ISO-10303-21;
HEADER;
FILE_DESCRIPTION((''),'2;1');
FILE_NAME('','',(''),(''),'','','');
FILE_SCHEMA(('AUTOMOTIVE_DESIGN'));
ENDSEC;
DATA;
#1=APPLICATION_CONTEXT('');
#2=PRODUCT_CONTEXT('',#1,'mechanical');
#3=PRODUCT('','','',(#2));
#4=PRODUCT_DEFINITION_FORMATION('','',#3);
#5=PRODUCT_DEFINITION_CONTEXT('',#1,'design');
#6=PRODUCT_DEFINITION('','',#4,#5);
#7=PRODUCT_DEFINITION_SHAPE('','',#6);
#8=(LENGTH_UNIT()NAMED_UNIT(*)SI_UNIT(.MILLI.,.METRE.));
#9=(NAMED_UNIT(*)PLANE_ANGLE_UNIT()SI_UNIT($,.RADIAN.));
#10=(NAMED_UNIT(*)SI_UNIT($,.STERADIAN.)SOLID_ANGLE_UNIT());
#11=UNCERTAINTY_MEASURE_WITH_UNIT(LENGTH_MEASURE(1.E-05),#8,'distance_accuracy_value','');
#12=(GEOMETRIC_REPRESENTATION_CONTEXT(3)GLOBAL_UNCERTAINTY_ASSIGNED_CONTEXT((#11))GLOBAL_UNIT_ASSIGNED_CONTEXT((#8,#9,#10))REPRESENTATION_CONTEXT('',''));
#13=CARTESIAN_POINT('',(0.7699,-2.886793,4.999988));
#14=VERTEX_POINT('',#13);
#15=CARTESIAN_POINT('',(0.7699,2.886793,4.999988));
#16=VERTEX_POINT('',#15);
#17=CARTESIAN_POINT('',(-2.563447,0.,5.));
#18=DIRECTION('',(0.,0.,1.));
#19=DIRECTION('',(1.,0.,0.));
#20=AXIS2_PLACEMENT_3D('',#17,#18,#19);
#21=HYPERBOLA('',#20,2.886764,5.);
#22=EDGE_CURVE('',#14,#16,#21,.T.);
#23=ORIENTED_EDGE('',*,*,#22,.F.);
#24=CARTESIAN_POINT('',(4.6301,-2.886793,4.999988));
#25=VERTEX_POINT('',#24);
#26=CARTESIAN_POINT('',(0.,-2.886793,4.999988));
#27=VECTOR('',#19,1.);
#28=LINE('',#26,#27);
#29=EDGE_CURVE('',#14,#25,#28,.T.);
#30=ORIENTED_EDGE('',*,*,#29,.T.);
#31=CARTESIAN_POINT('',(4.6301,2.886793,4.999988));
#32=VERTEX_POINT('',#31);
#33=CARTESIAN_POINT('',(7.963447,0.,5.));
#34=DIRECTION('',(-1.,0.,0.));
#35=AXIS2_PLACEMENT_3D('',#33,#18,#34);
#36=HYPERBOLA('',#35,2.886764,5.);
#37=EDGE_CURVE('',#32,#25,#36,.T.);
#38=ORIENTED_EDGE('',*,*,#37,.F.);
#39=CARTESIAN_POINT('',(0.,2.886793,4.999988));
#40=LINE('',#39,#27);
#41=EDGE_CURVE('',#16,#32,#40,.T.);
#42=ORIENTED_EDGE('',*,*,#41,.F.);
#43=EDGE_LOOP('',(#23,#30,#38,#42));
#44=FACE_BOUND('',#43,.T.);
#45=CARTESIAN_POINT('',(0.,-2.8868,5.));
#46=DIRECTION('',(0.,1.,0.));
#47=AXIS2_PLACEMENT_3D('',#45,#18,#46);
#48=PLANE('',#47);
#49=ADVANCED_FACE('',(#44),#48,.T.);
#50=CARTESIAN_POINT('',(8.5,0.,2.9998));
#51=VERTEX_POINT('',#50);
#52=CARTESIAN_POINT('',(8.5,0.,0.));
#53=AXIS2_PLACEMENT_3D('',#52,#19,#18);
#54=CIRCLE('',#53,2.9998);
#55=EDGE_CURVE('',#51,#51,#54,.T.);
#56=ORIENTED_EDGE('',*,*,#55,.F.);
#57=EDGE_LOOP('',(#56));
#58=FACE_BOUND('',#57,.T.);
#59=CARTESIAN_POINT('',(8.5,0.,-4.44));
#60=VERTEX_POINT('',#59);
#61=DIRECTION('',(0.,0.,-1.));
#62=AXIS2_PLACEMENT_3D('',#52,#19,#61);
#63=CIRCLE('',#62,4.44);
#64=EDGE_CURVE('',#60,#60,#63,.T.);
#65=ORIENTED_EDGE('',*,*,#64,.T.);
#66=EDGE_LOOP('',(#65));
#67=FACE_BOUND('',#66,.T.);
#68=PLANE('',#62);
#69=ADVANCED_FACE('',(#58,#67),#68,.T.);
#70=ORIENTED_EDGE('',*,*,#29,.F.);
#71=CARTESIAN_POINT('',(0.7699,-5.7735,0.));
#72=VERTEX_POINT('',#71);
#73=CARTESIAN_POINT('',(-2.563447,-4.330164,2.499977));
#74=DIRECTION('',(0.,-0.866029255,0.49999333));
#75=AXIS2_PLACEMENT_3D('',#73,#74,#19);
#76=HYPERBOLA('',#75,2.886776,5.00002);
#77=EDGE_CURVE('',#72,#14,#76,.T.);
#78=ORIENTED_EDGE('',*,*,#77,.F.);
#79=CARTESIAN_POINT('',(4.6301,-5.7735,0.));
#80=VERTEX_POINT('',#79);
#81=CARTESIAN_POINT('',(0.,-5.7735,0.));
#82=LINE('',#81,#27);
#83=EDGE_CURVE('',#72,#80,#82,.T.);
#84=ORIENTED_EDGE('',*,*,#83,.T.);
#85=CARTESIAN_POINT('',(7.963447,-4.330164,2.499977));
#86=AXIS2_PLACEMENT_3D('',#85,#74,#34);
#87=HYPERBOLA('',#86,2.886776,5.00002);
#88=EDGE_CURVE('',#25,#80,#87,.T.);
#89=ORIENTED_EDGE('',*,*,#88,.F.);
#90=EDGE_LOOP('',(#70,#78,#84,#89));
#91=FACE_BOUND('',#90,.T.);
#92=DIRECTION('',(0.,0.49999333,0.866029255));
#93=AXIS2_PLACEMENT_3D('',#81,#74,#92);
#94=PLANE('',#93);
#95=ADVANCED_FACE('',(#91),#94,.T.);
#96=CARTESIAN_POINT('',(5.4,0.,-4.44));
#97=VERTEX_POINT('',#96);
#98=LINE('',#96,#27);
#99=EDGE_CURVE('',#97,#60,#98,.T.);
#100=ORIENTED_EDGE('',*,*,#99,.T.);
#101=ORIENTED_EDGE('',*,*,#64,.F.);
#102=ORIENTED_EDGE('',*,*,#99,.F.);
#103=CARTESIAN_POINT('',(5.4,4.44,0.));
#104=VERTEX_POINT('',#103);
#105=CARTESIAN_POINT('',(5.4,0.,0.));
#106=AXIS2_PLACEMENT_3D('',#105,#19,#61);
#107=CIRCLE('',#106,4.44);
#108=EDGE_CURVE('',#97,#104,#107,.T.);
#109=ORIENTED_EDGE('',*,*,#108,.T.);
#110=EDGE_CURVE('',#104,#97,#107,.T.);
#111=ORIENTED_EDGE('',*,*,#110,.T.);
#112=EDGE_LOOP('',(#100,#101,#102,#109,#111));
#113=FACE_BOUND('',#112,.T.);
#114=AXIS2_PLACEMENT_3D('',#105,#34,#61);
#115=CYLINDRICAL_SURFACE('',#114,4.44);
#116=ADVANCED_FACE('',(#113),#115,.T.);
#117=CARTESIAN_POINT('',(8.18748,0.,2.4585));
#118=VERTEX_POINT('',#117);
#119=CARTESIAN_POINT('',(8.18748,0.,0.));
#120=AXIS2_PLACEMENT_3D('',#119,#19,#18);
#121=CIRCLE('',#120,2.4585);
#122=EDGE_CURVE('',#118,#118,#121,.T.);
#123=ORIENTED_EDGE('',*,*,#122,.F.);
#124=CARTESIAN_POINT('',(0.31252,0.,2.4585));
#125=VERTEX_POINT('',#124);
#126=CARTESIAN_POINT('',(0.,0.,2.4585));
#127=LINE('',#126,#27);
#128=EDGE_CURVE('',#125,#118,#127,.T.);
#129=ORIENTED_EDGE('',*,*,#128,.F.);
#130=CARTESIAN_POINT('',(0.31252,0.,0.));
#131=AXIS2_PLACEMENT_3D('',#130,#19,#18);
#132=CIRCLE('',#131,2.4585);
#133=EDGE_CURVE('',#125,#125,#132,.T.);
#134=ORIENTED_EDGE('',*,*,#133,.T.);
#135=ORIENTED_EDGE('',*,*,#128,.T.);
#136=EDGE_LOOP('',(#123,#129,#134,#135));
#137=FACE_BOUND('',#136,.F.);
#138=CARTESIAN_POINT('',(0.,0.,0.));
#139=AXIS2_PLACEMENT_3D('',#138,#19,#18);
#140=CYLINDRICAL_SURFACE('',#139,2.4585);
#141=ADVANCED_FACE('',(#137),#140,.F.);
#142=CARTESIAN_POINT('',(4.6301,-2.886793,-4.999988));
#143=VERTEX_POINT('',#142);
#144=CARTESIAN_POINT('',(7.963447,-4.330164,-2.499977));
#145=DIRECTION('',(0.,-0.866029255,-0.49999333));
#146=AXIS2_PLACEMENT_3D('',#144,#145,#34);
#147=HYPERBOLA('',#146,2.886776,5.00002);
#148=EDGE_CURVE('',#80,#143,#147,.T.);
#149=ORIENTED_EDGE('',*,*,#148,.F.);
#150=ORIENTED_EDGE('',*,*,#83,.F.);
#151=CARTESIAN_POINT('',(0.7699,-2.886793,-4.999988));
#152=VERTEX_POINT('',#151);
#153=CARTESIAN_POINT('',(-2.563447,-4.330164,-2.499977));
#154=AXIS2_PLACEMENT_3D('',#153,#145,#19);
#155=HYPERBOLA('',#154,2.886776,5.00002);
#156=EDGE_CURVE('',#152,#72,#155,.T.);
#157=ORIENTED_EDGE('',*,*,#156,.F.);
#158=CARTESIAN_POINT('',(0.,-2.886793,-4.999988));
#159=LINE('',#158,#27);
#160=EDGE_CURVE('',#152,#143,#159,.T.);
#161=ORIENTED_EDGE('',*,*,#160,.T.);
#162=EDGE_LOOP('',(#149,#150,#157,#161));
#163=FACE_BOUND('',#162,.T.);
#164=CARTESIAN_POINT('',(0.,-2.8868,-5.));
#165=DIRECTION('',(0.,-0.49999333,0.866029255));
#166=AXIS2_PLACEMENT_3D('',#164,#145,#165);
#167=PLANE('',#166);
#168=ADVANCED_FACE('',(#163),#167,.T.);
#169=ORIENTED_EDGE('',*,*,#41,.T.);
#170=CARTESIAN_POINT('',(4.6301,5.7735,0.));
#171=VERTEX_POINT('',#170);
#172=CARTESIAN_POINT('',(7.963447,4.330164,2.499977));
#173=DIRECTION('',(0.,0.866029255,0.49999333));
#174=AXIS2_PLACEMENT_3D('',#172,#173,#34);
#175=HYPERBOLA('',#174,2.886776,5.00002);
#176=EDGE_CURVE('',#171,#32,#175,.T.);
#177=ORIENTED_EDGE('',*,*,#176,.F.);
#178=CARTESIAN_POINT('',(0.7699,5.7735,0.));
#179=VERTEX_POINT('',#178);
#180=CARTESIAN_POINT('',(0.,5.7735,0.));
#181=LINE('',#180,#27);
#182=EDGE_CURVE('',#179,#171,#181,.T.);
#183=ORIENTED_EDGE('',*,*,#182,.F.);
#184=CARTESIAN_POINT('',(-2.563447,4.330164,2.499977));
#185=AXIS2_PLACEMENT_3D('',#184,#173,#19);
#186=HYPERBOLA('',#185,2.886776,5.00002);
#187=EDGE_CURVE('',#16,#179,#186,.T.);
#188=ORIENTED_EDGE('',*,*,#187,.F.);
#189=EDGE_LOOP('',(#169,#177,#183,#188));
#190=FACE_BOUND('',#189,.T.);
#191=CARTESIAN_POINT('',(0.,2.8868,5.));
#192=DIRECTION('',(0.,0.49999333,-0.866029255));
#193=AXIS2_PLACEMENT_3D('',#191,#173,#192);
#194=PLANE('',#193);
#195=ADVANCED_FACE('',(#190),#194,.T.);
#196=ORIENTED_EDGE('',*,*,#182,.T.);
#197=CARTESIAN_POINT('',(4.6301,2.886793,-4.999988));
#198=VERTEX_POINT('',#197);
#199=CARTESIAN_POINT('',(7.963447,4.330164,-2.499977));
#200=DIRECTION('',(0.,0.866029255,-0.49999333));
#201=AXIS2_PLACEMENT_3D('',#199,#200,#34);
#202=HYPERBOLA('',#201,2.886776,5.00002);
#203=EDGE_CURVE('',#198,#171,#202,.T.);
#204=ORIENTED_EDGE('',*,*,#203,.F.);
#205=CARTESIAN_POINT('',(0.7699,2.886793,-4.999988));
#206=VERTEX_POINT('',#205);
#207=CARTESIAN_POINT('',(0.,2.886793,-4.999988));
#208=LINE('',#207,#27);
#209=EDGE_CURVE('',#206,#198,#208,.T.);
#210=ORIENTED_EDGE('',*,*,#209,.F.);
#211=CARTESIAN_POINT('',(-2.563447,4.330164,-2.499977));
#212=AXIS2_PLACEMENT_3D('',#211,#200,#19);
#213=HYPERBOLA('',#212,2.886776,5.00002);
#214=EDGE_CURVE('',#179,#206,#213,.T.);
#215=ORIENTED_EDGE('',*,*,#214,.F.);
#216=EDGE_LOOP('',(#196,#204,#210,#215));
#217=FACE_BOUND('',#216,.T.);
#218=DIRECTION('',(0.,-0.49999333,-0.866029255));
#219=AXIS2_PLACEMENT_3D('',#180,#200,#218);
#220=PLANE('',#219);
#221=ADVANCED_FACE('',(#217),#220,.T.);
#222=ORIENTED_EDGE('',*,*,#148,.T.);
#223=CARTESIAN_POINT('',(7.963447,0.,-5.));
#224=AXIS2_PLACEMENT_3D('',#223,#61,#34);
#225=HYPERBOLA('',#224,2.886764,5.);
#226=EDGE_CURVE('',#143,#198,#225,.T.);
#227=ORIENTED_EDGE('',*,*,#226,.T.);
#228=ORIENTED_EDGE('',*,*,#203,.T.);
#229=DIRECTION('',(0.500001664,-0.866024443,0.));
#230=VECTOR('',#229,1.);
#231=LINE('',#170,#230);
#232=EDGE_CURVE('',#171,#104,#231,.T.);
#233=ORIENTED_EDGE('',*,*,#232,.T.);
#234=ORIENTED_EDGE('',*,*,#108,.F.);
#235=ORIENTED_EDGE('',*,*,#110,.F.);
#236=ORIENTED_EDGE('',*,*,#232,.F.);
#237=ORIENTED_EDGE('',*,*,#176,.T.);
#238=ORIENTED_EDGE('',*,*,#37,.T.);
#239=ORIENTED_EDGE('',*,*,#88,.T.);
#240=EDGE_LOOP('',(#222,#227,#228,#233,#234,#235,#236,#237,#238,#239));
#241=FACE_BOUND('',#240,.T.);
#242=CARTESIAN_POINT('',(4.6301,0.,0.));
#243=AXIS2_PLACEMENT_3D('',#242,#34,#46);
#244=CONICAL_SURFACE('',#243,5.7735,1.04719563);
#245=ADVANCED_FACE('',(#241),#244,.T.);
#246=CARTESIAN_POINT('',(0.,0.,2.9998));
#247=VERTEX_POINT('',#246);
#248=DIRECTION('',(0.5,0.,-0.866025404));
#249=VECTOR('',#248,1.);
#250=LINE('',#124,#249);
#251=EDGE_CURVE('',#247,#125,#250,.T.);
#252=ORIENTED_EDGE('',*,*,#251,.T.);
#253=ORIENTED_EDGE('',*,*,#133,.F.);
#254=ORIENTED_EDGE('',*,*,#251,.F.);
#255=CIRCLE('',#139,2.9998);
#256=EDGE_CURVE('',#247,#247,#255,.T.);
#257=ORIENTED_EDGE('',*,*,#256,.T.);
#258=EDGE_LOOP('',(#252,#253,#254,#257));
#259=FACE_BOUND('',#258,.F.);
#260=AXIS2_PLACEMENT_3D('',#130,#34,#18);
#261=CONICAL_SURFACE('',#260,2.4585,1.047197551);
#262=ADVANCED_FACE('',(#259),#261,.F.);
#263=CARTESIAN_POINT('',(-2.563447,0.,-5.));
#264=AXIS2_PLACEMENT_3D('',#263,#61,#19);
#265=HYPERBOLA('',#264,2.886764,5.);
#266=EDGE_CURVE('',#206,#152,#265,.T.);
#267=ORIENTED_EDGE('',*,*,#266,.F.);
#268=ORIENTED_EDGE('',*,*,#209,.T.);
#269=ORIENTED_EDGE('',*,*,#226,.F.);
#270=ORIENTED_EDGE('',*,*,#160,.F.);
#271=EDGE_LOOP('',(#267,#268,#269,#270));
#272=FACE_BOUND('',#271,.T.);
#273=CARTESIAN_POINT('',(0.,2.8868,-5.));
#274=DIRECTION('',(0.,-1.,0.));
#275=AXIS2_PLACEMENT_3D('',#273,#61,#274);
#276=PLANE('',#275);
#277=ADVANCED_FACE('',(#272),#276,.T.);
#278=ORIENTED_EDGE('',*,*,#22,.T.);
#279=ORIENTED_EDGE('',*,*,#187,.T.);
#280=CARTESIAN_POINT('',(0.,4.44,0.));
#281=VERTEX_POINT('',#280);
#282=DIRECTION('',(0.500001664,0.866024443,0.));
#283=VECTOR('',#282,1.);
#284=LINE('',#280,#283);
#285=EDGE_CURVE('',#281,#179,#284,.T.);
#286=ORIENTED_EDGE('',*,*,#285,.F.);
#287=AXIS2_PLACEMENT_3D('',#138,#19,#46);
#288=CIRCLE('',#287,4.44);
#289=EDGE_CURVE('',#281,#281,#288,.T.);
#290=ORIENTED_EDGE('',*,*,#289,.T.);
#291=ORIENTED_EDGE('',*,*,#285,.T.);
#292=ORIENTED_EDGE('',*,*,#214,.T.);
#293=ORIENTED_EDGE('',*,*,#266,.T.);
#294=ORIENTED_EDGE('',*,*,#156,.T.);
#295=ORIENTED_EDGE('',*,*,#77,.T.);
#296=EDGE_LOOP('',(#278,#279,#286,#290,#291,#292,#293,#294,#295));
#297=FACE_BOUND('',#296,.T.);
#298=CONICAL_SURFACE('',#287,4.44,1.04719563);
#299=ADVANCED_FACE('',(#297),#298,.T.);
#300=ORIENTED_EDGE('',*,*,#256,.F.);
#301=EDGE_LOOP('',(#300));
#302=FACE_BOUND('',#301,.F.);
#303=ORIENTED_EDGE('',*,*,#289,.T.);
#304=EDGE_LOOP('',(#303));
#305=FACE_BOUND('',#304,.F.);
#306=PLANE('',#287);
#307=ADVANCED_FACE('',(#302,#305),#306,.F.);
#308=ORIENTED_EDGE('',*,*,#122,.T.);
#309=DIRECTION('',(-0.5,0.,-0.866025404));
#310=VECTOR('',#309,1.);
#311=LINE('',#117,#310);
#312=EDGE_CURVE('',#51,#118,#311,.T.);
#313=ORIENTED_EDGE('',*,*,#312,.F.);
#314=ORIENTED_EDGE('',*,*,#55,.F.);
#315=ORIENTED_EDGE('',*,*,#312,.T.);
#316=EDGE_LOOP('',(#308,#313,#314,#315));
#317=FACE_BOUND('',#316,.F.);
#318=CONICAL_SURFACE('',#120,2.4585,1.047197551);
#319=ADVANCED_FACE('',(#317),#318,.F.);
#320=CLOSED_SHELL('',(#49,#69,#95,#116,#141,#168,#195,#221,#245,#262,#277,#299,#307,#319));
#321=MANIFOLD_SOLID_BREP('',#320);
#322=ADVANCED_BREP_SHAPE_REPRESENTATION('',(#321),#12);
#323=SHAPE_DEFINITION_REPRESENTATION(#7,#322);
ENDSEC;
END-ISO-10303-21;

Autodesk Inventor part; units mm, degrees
ref_plane "YZ Plane" through (0, 0, 0) normal (1, 0, 0) x (0, 1, 0)
ref_plane "XZ Plane" through (0, 0, 0) normal (0, 1, 0) x (-1, 0, 0)
sketch "Sketch1" plane through (0, 0, 0) normal (1, 0, 0) x (0, 1, 0)
  line L0 (2.8868, -5) -> (-2.8868, -5)
  line L1 (-2.8868, -5) -> (-5.7735, 0)
  line L2 (-5.7735, 0) -> (-2.8868, 5)
  line L3 (-2.8868, 5) -> (2.8868, 5)
  line L4 (2.8868, 5) -> (5.7735, 0)
  line L5 (5.7735, 0) -> (2.8868, -5)
  point P0 (0, 0)
  point P1 (0, 0)
  dimension "d0" = 11.547
extrude "Body" add sketch "Sketch1" along normal blind 5.4
sketch "Sketch2" plane through (5.4, 0, 0) normal (1, 0, 0) x (0, 0, -1)
  circle A0 centre (0, 0) radius 4.44
  dimension "d7" = 8.88
extrude "Ring" add sketch "Sketch2" along normal blind 3.1
sketch "Sketch3" plane through (0, 0, 0) normal (0, 0, 1) x (1, 0, 0)
  line L0 (0, 2.8868) -> (0, 5.7735) projected
  line L1 (0, 5.7735) -> (5.4, 5.7735) projected
  line L2 (5.4, 2.8868) -> (5.4, 5.7735) projected
  line L3 (-1.08, 0) -> (6.48, 0) projected
  line L4 (0, 4.44) -> (0.7699, 5.7735)
  line L5 (4.6301, 5.7735) -> (5.4, 4.44)
  dimension "d3" = 30
  dimension "d4" = 30
  dimension "d5" = 8.88
  dimension "d6" = 8.88
revolve "Chamfer1" cut sketch "Sketch3" angle 360 about axis through (-10, 0, 0) along (1, 0, 0)
sketch "Sketch4" plane through (0, 0, 0) normal (-1, 0, 0) x (0, 0, 1)
  line L0 (0, -8.0829) -> (0, 8.0829) projected
  line L1 (-7, 0) -> (7, 0) projected
  point P0 (0, 0)
hole "Thread" at (0, 0, 0) direction (1, 0, 0) diameter 4.917 end through all thread size "M6x1" class "6H" standard "ISO Metric profile"
chamfer "Chamfer2" distance 0.5413 angle 30 1 edges at (0, 0, -2.4585) measured on face at (0, 3.7305, -0.453)
chamfer "Chamfer3" distance 0.5413 angle 30 1 edges at (8.5, 0, -2.4585) measured on face at (8.5, -0.5503, -3.7127)
ref_plane "Work Plane1" through (17.5119, 0, 0) normal (0, 0, 1) x (-1, 0, 0)
equation "\"d0\" = 1.1547 * SW"
equation "\"d1\" = KOH1"
equation "\"d7\" = SD2"
equation "\"d8\" = KOH - KOH1"
equation "\"d3\" = ANG1"
equation "\"d4\" = ANG2"
equation "\"d5\" = SW0"
equation "\"d6\" = SW01"
equation "\"d10\" = -0.5 * GD1 + 0.5 * NND"
equation "\"d46\" = -0.5 * GD1 + 0.5 * NND"
equation "\"d12\" = -0.5 * GD1 + 0.5 * NND"
equation "\"d47\" = -0.5 * GD1 + 0.5 * NND"
equation "\"ANG1\" = 30deg"
equation "\"ANG2\" = 30deg"
equation "\"NND\" = 6"
equation "\"KOH1\" = 5.4"
equation "\"KOH\" = 8.5"
equation "\"SW0\" = 8.88"
equation "\"SW01\" = SW0"
equation "\"SD2\" = SW0"
equation "\"GUL\" = 0.541266 * PTC"
equation "\"THREADDIA\" = 6"
equation "\"TOA\" = 30deg"
equation "\"PTC\" = 1"
equation "\"GAL\" = 0.541266 * PTC"
equation "\"E0\" = 1.155 * SW"
equation "\"SW\" = 10"
equation "\"GD1\" = 4.917468"
properties part number "ISO 7041 - M6" material "Steel"
